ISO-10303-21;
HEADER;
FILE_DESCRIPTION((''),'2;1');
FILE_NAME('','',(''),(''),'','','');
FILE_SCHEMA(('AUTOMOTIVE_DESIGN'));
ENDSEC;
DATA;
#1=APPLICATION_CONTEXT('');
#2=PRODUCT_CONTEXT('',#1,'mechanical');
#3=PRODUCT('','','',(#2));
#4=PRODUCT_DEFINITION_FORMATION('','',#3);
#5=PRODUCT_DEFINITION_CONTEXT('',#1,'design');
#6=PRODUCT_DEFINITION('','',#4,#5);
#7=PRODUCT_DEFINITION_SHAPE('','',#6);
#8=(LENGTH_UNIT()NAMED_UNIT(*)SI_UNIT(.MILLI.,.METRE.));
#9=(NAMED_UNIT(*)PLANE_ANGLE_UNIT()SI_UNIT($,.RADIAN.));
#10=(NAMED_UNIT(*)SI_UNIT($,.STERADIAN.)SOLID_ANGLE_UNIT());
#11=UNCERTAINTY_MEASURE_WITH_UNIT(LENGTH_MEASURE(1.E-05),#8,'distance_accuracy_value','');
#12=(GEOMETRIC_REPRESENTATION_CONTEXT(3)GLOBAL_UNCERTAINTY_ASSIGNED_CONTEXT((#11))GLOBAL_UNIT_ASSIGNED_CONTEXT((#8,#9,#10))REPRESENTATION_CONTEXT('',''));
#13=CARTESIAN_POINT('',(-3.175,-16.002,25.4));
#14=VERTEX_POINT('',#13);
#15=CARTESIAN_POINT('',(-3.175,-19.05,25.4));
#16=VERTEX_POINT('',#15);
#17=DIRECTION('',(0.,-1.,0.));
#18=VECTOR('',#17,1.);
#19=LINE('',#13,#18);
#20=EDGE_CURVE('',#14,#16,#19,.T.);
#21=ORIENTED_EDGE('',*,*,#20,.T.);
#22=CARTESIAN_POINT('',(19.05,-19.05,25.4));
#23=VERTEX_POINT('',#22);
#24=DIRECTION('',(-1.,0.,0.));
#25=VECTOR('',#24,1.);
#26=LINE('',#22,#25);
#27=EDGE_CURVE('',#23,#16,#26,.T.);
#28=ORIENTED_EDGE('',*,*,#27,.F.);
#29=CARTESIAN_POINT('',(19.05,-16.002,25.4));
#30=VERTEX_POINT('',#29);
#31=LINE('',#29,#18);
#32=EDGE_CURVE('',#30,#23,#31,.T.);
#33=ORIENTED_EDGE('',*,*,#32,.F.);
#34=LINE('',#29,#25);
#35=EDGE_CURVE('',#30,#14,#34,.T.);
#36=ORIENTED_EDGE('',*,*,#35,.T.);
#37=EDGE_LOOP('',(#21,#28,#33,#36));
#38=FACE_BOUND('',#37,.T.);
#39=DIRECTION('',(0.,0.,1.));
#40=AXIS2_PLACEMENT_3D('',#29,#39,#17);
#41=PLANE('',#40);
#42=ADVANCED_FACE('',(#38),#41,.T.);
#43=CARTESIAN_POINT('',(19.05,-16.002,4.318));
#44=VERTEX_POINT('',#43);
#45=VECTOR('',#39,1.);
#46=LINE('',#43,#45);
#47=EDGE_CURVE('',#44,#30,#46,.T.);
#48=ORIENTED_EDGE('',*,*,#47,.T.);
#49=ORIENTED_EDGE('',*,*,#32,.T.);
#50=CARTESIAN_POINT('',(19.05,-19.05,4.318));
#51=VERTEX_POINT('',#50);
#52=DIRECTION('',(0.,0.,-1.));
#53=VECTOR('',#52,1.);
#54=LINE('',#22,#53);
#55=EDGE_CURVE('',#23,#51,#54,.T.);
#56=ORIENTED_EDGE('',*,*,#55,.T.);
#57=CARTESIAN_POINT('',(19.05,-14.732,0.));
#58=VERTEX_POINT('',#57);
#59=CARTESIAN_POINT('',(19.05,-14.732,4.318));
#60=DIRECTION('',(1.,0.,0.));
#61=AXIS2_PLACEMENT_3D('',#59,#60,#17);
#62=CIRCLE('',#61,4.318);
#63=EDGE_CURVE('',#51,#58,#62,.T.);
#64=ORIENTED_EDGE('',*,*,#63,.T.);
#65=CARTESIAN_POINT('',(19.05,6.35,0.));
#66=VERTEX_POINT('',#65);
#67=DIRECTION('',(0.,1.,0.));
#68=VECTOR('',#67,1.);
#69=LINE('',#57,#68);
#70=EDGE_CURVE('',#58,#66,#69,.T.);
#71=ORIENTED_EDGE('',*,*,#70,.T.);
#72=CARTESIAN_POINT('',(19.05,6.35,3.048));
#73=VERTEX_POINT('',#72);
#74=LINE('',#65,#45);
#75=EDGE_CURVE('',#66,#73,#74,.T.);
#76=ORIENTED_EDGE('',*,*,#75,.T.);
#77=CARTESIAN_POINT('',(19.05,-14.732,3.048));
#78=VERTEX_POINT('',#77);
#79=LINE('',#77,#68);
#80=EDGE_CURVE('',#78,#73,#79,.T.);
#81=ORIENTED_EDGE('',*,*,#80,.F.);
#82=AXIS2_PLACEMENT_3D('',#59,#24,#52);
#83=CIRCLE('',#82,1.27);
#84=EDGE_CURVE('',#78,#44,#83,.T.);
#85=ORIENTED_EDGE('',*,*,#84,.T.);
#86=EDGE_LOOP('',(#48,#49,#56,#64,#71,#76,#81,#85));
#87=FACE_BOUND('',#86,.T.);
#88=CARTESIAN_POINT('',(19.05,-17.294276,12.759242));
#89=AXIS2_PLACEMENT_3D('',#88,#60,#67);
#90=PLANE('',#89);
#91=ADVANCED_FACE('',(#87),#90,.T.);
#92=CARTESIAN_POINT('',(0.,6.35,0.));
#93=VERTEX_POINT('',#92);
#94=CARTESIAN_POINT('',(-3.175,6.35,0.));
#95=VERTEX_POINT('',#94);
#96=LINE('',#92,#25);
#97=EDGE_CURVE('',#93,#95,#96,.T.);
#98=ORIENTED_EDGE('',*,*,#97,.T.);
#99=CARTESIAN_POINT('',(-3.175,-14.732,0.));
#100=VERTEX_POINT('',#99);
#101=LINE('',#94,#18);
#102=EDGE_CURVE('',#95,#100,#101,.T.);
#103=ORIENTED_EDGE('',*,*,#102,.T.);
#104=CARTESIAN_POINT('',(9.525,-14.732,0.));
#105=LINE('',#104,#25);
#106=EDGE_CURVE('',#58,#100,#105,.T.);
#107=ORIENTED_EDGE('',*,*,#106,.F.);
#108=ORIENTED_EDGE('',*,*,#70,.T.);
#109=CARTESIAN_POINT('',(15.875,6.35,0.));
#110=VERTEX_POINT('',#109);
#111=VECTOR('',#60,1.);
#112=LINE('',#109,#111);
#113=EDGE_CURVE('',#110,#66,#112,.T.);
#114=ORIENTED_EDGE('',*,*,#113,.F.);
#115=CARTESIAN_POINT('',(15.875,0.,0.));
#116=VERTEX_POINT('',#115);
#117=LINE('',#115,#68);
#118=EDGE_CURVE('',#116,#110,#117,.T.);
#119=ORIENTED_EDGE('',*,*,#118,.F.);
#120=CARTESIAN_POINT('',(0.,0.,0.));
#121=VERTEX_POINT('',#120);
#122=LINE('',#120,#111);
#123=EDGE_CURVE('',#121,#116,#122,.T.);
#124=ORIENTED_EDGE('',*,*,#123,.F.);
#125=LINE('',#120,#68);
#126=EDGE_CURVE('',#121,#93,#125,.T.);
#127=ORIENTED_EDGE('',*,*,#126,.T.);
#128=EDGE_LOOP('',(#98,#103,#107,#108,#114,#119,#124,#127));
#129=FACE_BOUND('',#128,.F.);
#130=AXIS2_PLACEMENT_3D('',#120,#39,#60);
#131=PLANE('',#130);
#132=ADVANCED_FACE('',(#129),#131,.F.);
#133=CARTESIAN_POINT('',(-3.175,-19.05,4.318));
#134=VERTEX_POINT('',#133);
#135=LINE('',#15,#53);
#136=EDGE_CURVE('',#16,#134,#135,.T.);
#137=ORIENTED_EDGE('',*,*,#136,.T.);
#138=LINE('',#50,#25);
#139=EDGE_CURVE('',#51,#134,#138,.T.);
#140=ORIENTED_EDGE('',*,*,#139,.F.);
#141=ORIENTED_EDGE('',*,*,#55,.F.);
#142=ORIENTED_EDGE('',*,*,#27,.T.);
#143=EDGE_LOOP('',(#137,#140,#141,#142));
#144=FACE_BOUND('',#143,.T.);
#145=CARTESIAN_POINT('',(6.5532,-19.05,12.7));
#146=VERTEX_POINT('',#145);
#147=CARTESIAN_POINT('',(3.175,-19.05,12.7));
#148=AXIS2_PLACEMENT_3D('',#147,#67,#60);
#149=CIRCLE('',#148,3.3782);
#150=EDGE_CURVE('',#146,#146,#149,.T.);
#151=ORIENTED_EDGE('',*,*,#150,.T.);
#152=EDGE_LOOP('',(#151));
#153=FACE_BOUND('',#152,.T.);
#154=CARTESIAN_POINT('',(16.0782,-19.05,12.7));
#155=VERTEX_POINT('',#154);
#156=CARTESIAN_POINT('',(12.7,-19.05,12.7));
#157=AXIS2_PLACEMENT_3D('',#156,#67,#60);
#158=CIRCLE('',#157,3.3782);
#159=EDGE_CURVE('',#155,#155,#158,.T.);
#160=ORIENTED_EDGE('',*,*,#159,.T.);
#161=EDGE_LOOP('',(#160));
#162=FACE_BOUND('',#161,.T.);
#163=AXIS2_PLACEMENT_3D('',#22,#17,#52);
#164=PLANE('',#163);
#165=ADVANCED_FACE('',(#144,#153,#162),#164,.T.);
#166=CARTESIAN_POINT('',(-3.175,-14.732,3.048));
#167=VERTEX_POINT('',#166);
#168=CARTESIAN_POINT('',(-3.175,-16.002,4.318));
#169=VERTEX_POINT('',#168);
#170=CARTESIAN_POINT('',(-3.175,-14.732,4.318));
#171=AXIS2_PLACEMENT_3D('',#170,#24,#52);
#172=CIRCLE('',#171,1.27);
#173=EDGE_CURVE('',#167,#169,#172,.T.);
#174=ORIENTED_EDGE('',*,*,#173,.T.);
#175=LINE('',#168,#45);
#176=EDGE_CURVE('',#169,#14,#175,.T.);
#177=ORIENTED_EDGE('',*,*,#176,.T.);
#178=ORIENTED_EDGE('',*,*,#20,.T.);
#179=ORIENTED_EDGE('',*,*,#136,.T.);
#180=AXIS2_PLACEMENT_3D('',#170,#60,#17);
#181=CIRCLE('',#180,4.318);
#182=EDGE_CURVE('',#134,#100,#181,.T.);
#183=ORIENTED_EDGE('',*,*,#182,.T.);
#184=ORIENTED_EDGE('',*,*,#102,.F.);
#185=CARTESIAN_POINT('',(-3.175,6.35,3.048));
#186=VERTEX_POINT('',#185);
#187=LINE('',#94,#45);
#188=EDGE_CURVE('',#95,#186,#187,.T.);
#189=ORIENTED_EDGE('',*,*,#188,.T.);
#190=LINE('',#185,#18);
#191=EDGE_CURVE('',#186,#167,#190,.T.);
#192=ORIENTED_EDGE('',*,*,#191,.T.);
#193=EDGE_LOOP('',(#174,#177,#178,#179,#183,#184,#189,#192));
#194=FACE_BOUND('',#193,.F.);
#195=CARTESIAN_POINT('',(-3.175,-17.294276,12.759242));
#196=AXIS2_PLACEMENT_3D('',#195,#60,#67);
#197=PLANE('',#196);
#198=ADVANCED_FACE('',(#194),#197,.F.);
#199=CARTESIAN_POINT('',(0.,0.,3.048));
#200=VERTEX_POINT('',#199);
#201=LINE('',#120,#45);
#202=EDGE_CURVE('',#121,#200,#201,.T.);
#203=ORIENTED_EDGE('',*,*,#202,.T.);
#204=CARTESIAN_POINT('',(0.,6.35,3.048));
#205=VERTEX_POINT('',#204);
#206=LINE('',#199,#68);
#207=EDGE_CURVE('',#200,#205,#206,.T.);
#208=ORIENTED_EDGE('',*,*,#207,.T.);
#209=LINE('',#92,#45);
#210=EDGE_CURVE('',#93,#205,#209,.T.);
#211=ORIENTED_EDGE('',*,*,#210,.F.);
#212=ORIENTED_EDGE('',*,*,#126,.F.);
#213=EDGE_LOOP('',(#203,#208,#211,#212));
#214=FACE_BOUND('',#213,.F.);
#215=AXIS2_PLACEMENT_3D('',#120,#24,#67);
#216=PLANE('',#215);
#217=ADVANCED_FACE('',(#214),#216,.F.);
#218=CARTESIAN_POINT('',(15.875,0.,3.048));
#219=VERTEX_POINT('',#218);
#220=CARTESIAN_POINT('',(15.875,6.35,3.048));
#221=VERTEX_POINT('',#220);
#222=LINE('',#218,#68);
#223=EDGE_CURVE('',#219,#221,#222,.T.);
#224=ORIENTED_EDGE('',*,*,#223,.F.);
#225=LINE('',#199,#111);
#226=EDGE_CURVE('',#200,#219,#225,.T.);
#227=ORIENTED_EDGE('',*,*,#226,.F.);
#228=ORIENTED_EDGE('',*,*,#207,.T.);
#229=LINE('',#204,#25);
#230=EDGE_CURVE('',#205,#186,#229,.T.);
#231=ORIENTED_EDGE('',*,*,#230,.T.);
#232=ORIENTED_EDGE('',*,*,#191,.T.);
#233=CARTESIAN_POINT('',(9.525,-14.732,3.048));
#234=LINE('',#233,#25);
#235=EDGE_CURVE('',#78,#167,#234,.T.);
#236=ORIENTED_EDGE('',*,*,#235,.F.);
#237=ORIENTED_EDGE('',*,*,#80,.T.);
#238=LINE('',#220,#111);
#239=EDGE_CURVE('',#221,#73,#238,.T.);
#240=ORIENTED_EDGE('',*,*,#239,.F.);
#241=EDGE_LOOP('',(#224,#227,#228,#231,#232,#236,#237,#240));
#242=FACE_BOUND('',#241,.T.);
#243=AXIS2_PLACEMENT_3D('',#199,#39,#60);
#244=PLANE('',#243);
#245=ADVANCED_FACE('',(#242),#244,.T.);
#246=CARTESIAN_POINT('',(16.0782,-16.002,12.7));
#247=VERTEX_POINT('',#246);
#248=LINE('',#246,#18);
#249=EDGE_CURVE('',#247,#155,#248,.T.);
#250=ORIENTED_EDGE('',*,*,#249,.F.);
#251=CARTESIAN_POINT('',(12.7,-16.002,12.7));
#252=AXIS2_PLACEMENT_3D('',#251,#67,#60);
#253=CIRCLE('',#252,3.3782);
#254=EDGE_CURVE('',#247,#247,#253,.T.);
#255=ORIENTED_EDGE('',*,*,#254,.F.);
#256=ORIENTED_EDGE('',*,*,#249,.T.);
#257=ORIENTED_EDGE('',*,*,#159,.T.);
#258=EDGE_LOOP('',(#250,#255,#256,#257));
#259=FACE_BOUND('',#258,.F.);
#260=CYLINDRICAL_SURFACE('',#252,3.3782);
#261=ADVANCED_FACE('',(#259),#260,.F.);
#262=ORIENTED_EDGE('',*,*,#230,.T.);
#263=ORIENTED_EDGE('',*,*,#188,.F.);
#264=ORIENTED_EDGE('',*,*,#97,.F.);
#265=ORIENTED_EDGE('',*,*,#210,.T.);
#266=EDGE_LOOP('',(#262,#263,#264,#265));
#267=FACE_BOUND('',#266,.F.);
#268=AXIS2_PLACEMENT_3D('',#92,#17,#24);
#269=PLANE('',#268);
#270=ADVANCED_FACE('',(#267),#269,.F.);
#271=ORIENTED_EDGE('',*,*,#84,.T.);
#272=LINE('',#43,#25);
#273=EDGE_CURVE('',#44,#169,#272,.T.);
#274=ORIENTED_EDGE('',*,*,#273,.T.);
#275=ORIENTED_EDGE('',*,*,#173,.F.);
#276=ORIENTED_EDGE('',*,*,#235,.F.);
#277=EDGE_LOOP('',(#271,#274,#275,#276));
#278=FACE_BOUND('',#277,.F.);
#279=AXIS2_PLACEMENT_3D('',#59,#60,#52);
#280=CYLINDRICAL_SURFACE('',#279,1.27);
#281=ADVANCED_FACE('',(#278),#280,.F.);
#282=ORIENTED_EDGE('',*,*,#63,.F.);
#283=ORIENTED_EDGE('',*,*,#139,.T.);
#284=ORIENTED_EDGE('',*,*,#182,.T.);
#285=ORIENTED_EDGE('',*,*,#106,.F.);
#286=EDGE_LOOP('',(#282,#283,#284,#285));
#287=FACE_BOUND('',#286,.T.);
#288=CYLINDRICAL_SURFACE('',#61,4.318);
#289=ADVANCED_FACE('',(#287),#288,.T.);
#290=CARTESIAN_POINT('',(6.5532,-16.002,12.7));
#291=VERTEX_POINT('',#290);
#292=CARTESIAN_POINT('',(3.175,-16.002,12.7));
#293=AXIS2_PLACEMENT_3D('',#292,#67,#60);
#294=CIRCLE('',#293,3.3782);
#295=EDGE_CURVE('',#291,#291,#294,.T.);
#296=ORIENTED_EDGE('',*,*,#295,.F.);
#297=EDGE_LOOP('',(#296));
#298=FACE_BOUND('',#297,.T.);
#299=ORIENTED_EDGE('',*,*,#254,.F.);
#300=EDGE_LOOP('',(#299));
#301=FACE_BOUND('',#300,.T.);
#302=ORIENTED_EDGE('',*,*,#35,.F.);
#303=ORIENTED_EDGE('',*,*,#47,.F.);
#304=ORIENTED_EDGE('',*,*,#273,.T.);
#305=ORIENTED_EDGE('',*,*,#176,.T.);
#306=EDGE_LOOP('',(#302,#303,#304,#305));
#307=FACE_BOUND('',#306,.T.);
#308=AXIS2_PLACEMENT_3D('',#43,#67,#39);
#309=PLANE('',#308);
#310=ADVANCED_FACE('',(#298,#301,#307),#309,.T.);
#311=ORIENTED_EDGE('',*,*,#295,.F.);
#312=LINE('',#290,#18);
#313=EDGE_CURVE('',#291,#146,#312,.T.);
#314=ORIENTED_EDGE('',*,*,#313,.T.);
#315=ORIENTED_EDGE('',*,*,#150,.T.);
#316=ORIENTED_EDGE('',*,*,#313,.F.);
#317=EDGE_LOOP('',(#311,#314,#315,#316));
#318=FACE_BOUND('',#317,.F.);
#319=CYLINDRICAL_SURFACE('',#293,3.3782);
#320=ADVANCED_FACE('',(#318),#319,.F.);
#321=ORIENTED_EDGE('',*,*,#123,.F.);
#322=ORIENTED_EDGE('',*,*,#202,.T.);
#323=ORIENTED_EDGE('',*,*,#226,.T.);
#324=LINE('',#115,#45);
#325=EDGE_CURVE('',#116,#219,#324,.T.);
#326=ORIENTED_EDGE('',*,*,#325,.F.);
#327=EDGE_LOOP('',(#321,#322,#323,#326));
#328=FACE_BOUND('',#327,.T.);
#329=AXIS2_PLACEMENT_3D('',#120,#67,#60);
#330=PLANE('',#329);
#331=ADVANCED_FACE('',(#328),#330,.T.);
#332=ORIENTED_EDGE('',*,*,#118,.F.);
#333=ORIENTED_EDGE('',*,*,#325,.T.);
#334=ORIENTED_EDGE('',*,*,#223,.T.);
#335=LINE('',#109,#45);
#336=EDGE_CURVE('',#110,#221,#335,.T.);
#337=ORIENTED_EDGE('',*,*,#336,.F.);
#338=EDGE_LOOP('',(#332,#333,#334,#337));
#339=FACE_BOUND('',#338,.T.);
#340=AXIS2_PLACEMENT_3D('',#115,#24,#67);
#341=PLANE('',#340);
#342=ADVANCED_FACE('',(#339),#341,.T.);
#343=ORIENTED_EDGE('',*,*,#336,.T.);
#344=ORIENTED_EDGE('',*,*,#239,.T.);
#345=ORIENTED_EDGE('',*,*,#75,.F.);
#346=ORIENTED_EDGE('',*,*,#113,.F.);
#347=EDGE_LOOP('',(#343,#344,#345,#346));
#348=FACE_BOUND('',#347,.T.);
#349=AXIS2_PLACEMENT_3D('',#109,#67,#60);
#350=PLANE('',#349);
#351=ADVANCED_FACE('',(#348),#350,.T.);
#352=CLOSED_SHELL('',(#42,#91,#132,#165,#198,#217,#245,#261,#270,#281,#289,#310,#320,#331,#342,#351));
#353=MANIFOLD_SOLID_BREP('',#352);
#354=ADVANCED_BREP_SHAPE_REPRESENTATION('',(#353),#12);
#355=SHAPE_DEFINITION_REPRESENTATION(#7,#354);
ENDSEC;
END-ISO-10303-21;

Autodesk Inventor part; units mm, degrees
ref_plane "YZ Plane" through (0, 0, 0) normal (1, 0, 0) x (0, 1, 0)
ref_plane "XZ Plane" through (0, 0, 0) normal (0, 1, 0) x (-1, 0, 0)
ref_plane "XY Plane" through (0, 0, 0) normal (0, 0, 1) x (1, 0, 0)
sketch "Sketch1" plane through (0, 0, 0) normal (0, 0, 1) x (1, 0, 0)
  line L0 (0, 0) -> (0, 6.35)
  line L1 (0, 6.35) -> (-3.175, 6.35)
  line L2 (-3.175, 6.35) -> (-3.175, -3.175)
  line L3 (0, 0) -> (15.875, 0)
  line L4 (15.875, 0) -> (15.875, 6.35)
  line L5 (15.875, 6.35) -> (19.05, 6.35)
  line L6 (19.05, 6.35) -> (19.05, -3.175)
  line L7 (-3.175, -3.175) -> (-3.175, -19.05)
  line L8 (-3.175, -19.05) -> (19.05, -19.05)
  line L9 (19.05, -19.05) -> (19.05, -3.175)
  dimension "d0" = 6.35
  dimension "d1" = 3.175
  dimension "d2" = 9.525
  dimension "d3" = 15.875
  dimension "d4" = 3.175
  dimension "d6" = 15.875
extrude "Plate1" add sketch "Sketch1" along normal blind 3.048
sketch "Sketch2" plane through (19.05, -16.002, 0) normal (0, -1, 0) x (1, 0, 0)
  line L0 (-22.225, 0) -> (0, 0)
  line L1 (0, 0) -> (0, 25.4)
  line L2 (0, 25.4) -> (-22.225, 25.4)
  line L3 (-22.225, 25.4) -> (-22.225, 0)
edge flange "Flange1" height 25.4 angle 90 thickness 3.048 bend radius 1.27 thickness toward (0, -1, 0) relief tear relief width 3.048 relief depth 1.524 edges at (7.9375, -19.05, 3.048) wall of the first edge with corners at (-3.175, -16.002, 0) (19.05, -16.002, 0) (19.05, -16.002, 25.4) (-3.175, -16.002, 25.4)
bend "Bend1"
corner "Corner1"
sketch "Sketch3" plane through (-3.175, -16.002, 25.4) normal (0, 1, 0) x (1, 0, 0)
  line L0 (0, 0) -> (0, 21.082) projected
  line L1 (0, 0) -> (22.225, 0) projected
  line L2 (22.225, 0) -> (22.225, 21.082) projected
  circle A0 centre (6.35, 12.7) radius 3.3782
  circle A1 centre (15.875, 12.7) radius 3.3782
  point P0 (3.175, 25.4)
  dimension "d23" = 6.7564
  dimension "d24" = 6.7564
  dimension "d25" = 12.7
  dimension "d26" = 12.7
  dimension "d27" = 6.35
  dimension "d28" = 6.35
extrude "Cut1" cut sketch "Sketch3" against normal blind 3.048
equation "\"d29\" = Thickness"
equation "\"d13\" = BendReliefWidth"
equation "\"d14\" = BendReliefDepth"
equation "\"d15\" = MinimumRemnant"
equation "\"d16\" = BendRadius"
equation "\"d20\" = CornerReliefSize"
equation "\"d21\" = GapSize"
equation "\"d22\" = JacobiRadiusSize"
equation "\"BendRadius\" = Thickness"
equation "\"BendReliefWidth\" = Thickness"
equation "\"BendReliefDepth\" = 0.5 * Thickness"
equation "\"CornerReliefSize\" = 4 * Thickness"
equation "\"MinimumRemnant\" = 2 * Thickness"
equation "\"TransitionRadius\" = BendRadius"
equation "\"JacobiRadiusSize\" = BendRadius"
equation "\"GapSize\" = Thickness"
equation "\"d12\" = BendRadius"
equation "\"Thickness\" = 3.048"
properties part number "Glider"
